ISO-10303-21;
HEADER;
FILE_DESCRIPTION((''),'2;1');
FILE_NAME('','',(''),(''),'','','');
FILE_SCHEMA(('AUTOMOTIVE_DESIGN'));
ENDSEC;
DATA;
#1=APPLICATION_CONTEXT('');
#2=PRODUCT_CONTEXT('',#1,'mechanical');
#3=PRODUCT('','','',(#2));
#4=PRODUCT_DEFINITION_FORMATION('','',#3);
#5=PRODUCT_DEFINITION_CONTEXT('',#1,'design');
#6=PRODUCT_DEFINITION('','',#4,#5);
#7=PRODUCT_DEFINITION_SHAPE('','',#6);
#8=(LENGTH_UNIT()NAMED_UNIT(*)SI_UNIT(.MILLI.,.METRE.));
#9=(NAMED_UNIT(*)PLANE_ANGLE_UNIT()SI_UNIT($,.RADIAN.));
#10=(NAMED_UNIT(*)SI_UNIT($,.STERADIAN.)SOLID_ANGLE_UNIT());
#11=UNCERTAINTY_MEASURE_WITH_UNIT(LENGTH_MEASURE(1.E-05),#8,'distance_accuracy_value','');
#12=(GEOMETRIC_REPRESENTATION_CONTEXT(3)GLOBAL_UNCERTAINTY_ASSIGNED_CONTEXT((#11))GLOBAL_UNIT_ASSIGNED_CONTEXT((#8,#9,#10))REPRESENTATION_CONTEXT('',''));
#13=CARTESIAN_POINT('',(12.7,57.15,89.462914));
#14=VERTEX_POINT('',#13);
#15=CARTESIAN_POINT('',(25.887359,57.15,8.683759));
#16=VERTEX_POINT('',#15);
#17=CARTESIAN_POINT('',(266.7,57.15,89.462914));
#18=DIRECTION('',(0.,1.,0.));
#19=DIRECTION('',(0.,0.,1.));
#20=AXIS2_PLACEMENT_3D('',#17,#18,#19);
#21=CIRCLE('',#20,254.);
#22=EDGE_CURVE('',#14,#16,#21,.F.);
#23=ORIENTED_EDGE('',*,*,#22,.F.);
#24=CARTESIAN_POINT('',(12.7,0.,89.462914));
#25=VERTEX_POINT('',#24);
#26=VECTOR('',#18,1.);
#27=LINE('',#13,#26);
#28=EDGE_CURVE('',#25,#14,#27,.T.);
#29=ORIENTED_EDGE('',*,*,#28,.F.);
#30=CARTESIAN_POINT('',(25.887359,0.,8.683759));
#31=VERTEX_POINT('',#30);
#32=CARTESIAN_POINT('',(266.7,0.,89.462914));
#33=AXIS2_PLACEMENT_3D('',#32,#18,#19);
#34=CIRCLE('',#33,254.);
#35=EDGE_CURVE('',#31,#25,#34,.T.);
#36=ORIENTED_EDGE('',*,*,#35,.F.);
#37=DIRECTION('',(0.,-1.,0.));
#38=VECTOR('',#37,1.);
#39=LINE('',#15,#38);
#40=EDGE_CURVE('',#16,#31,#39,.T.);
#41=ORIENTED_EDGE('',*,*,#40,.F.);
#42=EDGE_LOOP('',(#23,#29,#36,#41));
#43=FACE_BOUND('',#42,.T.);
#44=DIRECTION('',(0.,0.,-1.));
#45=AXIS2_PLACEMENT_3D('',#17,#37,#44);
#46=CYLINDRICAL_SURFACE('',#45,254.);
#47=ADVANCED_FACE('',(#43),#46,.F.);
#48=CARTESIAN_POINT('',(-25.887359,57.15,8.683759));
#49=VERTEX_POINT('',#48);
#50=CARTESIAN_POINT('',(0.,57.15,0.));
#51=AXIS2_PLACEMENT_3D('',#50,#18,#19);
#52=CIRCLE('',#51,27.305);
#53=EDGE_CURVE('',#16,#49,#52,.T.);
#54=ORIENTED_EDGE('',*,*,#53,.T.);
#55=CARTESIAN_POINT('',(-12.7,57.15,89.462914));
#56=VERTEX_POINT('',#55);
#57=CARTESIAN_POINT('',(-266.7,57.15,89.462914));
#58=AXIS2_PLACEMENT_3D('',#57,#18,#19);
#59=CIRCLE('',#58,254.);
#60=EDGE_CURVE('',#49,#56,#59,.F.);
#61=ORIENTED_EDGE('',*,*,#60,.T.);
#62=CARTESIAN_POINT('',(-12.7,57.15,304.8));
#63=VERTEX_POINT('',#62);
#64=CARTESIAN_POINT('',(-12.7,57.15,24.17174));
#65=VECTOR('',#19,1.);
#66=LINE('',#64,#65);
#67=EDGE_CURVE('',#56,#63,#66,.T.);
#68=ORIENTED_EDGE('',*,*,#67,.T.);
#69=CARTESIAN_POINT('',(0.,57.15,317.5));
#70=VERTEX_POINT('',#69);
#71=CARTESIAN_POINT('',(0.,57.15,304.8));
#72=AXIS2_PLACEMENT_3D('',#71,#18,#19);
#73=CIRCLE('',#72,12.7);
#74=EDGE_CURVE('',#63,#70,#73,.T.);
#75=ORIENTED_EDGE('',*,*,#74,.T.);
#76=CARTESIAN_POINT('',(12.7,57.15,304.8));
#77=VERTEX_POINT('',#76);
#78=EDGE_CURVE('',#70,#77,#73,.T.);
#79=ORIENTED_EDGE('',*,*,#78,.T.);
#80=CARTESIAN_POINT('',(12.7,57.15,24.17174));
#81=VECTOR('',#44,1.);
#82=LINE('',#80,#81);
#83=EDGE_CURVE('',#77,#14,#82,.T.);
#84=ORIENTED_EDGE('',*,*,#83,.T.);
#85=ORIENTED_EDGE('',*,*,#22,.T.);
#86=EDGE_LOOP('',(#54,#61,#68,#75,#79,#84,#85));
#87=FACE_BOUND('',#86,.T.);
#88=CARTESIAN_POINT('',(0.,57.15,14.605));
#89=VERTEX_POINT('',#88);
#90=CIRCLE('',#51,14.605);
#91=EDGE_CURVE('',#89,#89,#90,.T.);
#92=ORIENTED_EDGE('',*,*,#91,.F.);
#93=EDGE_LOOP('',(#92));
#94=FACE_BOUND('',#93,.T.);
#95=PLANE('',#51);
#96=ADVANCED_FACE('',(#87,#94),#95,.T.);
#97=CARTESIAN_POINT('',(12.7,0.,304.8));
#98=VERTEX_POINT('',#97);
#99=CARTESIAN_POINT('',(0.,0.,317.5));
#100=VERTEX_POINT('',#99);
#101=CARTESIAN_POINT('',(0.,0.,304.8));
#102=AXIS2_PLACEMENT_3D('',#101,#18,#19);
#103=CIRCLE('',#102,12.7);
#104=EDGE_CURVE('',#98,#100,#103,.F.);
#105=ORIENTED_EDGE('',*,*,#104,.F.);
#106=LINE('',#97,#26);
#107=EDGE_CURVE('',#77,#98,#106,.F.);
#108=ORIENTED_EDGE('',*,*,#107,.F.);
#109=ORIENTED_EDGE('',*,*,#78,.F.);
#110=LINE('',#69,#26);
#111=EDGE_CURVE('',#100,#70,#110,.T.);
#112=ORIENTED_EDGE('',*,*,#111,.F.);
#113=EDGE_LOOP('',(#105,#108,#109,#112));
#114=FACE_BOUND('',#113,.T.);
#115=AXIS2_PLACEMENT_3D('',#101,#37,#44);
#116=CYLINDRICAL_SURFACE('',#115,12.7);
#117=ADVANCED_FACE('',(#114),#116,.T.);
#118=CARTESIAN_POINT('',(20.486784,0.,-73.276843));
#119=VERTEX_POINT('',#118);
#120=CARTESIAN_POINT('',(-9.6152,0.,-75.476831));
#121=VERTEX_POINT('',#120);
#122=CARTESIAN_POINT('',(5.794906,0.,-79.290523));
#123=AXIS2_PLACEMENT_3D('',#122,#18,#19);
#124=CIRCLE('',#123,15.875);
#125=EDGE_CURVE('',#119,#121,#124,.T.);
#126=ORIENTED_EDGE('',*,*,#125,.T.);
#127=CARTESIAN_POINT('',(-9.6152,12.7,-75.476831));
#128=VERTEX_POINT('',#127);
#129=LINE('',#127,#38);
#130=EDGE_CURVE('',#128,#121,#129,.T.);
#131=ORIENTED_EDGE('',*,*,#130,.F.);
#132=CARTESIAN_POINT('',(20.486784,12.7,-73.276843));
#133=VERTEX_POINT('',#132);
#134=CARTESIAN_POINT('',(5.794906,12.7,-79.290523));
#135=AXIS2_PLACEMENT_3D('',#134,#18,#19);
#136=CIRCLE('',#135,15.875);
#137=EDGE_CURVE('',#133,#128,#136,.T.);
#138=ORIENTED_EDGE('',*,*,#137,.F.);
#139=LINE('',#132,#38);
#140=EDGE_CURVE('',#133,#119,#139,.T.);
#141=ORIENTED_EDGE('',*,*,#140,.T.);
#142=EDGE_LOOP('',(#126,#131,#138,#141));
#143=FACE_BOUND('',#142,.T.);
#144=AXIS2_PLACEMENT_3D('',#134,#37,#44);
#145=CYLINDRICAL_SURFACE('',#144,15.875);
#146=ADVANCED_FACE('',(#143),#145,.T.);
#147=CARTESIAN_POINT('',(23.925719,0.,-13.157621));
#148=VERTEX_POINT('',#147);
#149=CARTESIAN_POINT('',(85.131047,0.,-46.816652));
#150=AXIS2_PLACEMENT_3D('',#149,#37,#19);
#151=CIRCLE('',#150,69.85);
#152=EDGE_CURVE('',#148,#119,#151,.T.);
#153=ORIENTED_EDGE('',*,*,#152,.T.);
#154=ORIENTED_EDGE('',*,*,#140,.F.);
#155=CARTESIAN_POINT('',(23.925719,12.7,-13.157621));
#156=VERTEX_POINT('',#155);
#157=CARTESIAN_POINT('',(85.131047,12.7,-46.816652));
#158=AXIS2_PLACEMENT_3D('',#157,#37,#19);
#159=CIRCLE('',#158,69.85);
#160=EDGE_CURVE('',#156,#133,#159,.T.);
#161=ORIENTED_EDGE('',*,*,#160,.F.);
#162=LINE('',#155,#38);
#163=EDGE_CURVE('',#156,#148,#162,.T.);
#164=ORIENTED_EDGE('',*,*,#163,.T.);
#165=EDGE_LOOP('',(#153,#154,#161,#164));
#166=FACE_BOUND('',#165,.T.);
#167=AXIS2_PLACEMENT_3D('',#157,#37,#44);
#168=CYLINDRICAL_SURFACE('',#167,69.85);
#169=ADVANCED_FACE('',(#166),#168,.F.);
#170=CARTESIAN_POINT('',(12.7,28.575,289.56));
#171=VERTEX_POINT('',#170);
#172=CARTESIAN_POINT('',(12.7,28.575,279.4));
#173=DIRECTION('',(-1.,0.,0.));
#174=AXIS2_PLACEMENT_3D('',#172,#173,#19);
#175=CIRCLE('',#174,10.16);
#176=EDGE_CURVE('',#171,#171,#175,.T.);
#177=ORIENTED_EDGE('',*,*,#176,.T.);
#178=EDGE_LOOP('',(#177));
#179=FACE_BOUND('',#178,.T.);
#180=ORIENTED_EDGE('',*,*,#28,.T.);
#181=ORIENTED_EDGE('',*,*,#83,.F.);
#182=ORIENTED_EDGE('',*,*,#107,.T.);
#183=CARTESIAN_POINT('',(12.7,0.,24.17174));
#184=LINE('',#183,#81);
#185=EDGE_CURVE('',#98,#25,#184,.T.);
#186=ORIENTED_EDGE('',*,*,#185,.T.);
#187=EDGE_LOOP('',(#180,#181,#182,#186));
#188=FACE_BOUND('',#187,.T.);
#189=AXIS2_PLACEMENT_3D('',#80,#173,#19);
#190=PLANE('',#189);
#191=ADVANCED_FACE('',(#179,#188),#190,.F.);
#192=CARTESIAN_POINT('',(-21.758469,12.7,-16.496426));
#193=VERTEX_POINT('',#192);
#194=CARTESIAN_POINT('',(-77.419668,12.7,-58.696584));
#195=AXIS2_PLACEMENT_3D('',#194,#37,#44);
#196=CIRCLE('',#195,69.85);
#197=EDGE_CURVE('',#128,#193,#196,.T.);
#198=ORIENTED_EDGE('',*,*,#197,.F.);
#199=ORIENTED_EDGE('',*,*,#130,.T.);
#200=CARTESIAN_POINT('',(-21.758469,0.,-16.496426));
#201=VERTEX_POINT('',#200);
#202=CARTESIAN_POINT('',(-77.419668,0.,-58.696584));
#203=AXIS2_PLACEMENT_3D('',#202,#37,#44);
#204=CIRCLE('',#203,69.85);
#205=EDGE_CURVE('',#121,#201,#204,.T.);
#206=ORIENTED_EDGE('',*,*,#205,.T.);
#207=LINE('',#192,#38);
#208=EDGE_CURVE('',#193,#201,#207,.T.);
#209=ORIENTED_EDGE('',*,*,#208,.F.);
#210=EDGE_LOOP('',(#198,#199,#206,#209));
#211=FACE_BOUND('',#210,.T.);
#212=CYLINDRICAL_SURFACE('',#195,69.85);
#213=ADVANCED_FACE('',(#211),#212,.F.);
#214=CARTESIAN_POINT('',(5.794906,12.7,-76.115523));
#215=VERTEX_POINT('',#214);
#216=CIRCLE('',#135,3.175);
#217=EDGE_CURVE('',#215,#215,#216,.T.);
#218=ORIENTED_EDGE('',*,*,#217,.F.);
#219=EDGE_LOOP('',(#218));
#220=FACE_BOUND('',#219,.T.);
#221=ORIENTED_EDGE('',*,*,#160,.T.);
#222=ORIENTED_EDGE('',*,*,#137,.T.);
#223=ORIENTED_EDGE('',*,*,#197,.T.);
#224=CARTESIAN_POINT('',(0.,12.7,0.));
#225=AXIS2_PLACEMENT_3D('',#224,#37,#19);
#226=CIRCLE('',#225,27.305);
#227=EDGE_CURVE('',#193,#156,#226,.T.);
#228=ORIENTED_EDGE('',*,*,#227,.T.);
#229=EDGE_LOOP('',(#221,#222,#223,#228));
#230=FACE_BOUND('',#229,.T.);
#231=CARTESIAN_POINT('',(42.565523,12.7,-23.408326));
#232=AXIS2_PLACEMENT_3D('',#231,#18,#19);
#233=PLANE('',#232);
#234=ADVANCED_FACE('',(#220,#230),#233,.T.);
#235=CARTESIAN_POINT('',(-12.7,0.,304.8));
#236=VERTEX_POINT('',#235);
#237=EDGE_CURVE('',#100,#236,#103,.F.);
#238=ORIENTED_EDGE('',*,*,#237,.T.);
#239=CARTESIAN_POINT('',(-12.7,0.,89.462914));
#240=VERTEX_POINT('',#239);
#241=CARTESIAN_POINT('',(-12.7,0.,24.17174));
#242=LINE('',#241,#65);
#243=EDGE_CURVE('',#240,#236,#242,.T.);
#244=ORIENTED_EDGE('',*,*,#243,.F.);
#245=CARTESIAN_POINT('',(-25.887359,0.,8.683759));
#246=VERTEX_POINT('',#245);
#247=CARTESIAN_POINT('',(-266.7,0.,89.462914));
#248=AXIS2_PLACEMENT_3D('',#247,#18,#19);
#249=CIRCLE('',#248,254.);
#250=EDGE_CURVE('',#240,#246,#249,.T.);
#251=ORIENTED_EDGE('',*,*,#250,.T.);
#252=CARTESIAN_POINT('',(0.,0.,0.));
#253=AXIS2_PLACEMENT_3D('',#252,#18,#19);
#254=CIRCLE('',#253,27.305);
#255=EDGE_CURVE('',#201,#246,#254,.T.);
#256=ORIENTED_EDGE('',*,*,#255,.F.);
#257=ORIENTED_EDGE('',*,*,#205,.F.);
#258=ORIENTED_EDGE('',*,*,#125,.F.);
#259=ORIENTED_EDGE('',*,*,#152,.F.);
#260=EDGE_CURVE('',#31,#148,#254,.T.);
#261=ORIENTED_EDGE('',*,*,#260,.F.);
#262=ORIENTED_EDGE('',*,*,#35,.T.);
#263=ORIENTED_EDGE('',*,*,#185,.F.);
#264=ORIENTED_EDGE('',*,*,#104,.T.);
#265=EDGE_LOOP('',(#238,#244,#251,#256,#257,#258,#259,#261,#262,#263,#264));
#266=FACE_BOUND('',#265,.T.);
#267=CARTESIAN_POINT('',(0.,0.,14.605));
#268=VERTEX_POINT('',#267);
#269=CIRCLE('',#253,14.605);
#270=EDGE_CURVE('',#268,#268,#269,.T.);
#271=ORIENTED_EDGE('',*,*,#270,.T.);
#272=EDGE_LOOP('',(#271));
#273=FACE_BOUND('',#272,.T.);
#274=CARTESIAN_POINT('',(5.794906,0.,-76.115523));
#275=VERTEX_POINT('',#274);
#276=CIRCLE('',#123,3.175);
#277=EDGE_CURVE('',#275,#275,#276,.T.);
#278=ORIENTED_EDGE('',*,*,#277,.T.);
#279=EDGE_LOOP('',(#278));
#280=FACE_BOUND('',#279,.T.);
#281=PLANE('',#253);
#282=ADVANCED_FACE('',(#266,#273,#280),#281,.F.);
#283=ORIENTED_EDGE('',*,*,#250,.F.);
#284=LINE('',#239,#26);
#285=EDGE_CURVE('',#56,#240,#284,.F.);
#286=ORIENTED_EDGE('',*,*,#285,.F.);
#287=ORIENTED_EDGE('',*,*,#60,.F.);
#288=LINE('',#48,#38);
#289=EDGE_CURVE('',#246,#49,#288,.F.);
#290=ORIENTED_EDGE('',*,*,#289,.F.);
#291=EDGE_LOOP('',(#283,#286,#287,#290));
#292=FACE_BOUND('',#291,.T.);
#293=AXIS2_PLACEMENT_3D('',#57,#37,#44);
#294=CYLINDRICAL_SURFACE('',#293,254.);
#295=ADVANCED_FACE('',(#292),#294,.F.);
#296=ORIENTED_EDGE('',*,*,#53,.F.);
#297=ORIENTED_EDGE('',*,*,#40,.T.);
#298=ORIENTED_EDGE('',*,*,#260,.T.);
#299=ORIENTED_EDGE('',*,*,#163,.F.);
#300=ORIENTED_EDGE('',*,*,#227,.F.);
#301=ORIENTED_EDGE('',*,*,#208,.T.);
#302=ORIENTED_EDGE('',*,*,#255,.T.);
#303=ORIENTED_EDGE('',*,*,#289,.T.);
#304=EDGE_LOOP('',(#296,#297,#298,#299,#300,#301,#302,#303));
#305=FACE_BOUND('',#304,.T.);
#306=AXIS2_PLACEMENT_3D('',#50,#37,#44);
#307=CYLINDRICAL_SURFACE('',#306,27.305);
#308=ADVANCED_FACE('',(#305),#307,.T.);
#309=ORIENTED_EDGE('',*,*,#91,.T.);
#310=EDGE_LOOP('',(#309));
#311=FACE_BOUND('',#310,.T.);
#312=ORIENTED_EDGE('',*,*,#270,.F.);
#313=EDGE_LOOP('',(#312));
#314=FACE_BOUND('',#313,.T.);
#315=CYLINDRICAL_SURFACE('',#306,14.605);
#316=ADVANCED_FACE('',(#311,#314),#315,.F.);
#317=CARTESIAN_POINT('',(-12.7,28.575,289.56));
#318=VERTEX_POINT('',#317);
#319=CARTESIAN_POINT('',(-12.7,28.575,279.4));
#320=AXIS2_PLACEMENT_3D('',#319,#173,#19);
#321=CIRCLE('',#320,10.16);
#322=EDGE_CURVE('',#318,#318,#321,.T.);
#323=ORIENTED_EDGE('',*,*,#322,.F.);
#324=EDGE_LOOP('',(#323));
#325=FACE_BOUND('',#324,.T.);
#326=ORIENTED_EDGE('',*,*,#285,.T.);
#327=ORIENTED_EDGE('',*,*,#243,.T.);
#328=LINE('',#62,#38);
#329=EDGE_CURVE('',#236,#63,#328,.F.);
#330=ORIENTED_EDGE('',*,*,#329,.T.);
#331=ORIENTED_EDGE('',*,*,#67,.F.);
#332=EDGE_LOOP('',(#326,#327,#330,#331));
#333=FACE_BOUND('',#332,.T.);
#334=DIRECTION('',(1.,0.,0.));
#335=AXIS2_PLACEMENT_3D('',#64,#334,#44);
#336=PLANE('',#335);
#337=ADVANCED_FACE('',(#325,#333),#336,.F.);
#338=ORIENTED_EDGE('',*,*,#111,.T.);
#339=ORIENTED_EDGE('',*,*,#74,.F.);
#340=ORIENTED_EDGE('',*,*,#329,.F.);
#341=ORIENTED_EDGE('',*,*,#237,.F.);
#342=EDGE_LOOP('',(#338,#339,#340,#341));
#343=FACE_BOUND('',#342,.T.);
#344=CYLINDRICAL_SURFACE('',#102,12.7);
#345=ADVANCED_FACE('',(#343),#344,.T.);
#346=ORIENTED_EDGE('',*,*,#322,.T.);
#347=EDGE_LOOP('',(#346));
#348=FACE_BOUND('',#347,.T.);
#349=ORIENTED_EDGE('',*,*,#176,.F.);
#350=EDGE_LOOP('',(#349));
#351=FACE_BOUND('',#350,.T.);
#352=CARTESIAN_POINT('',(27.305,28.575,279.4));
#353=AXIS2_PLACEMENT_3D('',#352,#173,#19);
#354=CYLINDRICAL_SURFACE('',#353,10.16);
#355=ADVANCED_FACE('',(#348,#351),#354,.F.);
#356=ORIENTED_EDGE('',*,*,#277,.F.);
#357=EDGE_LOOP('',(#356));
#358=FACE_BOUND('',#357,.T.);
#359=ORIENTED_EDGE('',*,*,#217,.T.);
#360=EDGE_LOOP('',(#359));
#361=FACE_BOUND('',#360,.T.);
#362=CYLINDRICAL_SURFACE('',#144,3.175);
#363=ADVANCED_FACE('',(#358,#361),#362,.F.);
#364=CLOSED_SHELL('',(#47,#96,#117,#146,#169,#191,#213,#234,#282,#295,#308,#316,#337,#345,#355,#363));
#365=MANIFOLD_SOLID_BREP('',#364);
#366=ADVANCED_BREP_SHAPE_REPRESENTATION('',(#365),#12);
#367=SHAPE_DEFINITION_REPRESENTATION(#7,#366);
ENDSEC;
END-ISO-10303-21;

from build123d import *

# Parameters (mm, degrees)
SKETCH1_R           = 14.605
BOSS_EXTRUDE1_DEPTH = 57.15
FILLET1_R           = 254
SKETCH2_R           = 10.16
CUT_EXTRUDE1_DEPTH  = 313.681247479
SKETCH8_R           = 3.175
BOSS_EXTRUDE6_DEPTH = 12.7
SKETCH9_W           = 25.4
SKETCH9_H           = 57.15
BOSS_EXTRUDE7_DEPTH = 12.7
FILLET2_R           = 12.7


with BuildPart() as part:
    # Sketch1 → Boss-Extrude1 (new body)
    with BuildSketch(Plane(origin=(0, 0, 0), x_dir=(1, 0, 0), z_dir=(0, 1, 0))):
        with BuildLine():
            Line((-12.7, -24.171740215), (-12.7, -304.8))
            Line((-12.7, -304.8), (12.7, -304.8))
            Line((12.7, -304.8), (12.7, -24.171740215))
            ThreePointArc((12.7, -24.171740215), (0, 27.305), (-12.7, -24.171740215))
        make_face()
        with Locations(Location((0, 0, 0), (0, 0, 270))):
            Circle(SKETCH1_R, mode=Mode.SUBTRACT)
    extrude(amount=BOSS_EXTRUDE1_DEPTH)

    # Fillet1
    fillet1_edges = [part.edges().sort_by_distance(p)[0] for p in [
        (12.7, 28.575, 24.171740215),
        (-12.7, 28.575, 24.171740215),
    ]]
    fillet(fillet1_edges, radius=FILLET1_R)

    # Sketch2 → Cut-Extrude1 (cut, through all)
    with BuildSketch(Plane.ZY.offset(12.7)):
        with Locations((279.4, 28.575)):
            Circle(SKETCH2_R)
    extrude(amount=-CUT_EXTRUDE1_DEPTH, mode=Mode.SUBTRACT)

    # Sketch8 → Boss-Extrude6 (add)
    with BuildSketch(Plane(origin=(0, 0, 0), x_dir=(1, 0, 0), z_dir=(0, 1, 0))):
        with BuildLine():
            ThreePointArc((20.48678387, 73.276843268), (6.952035658, 95.123295408), (-9.615200393, 75.476830843))
            ThreePointArc((-9.615200393, 75.476830843), (-9.004649416, 44.610856641), (-21.758468792, 16.496425698))
            ThreePointArc((-21.758468792, 16.496425698), (1.990263204, 27.232368193), (23.925719089, 13.157621026))
            ThreePointArc((23.925719089, 13.157621026), (15.395044016, 42.827617971), (20.48678387, 73.276843268))
        make_face()
        with Locations(Location((5.794905888, 79.290523203, 0), (0, 0, 270))):
            Circle(SKETCH8_R, mode=Mode.SUBTRACT)
    extrude(amount=BOSS_EXTRUDE6_DEPTH)

    # Sketch9 → Boss-Extrude7 (add)
    with BuildSketch(Plane.XY.offset(304.8)):
        with Locations((0, 28.575)):
            Rectangle(SKETCH9_W, SKETCH9_H)
    extrude(amount=BOSS_EXTRUDE7_DEPTH)

    # Fillet2
    fillet2_edges = [part.edges().sort_by_distance(p)[0] for p in [
        (-12.7, 28.575, 317.5),
        (12.7, 28.575, 317.5),
    ]]
    fillet(fillet2_edges, radius=FILLET2_R - 0.0001)  # a hair under: the kernel refuses the full size


solid = part.part
